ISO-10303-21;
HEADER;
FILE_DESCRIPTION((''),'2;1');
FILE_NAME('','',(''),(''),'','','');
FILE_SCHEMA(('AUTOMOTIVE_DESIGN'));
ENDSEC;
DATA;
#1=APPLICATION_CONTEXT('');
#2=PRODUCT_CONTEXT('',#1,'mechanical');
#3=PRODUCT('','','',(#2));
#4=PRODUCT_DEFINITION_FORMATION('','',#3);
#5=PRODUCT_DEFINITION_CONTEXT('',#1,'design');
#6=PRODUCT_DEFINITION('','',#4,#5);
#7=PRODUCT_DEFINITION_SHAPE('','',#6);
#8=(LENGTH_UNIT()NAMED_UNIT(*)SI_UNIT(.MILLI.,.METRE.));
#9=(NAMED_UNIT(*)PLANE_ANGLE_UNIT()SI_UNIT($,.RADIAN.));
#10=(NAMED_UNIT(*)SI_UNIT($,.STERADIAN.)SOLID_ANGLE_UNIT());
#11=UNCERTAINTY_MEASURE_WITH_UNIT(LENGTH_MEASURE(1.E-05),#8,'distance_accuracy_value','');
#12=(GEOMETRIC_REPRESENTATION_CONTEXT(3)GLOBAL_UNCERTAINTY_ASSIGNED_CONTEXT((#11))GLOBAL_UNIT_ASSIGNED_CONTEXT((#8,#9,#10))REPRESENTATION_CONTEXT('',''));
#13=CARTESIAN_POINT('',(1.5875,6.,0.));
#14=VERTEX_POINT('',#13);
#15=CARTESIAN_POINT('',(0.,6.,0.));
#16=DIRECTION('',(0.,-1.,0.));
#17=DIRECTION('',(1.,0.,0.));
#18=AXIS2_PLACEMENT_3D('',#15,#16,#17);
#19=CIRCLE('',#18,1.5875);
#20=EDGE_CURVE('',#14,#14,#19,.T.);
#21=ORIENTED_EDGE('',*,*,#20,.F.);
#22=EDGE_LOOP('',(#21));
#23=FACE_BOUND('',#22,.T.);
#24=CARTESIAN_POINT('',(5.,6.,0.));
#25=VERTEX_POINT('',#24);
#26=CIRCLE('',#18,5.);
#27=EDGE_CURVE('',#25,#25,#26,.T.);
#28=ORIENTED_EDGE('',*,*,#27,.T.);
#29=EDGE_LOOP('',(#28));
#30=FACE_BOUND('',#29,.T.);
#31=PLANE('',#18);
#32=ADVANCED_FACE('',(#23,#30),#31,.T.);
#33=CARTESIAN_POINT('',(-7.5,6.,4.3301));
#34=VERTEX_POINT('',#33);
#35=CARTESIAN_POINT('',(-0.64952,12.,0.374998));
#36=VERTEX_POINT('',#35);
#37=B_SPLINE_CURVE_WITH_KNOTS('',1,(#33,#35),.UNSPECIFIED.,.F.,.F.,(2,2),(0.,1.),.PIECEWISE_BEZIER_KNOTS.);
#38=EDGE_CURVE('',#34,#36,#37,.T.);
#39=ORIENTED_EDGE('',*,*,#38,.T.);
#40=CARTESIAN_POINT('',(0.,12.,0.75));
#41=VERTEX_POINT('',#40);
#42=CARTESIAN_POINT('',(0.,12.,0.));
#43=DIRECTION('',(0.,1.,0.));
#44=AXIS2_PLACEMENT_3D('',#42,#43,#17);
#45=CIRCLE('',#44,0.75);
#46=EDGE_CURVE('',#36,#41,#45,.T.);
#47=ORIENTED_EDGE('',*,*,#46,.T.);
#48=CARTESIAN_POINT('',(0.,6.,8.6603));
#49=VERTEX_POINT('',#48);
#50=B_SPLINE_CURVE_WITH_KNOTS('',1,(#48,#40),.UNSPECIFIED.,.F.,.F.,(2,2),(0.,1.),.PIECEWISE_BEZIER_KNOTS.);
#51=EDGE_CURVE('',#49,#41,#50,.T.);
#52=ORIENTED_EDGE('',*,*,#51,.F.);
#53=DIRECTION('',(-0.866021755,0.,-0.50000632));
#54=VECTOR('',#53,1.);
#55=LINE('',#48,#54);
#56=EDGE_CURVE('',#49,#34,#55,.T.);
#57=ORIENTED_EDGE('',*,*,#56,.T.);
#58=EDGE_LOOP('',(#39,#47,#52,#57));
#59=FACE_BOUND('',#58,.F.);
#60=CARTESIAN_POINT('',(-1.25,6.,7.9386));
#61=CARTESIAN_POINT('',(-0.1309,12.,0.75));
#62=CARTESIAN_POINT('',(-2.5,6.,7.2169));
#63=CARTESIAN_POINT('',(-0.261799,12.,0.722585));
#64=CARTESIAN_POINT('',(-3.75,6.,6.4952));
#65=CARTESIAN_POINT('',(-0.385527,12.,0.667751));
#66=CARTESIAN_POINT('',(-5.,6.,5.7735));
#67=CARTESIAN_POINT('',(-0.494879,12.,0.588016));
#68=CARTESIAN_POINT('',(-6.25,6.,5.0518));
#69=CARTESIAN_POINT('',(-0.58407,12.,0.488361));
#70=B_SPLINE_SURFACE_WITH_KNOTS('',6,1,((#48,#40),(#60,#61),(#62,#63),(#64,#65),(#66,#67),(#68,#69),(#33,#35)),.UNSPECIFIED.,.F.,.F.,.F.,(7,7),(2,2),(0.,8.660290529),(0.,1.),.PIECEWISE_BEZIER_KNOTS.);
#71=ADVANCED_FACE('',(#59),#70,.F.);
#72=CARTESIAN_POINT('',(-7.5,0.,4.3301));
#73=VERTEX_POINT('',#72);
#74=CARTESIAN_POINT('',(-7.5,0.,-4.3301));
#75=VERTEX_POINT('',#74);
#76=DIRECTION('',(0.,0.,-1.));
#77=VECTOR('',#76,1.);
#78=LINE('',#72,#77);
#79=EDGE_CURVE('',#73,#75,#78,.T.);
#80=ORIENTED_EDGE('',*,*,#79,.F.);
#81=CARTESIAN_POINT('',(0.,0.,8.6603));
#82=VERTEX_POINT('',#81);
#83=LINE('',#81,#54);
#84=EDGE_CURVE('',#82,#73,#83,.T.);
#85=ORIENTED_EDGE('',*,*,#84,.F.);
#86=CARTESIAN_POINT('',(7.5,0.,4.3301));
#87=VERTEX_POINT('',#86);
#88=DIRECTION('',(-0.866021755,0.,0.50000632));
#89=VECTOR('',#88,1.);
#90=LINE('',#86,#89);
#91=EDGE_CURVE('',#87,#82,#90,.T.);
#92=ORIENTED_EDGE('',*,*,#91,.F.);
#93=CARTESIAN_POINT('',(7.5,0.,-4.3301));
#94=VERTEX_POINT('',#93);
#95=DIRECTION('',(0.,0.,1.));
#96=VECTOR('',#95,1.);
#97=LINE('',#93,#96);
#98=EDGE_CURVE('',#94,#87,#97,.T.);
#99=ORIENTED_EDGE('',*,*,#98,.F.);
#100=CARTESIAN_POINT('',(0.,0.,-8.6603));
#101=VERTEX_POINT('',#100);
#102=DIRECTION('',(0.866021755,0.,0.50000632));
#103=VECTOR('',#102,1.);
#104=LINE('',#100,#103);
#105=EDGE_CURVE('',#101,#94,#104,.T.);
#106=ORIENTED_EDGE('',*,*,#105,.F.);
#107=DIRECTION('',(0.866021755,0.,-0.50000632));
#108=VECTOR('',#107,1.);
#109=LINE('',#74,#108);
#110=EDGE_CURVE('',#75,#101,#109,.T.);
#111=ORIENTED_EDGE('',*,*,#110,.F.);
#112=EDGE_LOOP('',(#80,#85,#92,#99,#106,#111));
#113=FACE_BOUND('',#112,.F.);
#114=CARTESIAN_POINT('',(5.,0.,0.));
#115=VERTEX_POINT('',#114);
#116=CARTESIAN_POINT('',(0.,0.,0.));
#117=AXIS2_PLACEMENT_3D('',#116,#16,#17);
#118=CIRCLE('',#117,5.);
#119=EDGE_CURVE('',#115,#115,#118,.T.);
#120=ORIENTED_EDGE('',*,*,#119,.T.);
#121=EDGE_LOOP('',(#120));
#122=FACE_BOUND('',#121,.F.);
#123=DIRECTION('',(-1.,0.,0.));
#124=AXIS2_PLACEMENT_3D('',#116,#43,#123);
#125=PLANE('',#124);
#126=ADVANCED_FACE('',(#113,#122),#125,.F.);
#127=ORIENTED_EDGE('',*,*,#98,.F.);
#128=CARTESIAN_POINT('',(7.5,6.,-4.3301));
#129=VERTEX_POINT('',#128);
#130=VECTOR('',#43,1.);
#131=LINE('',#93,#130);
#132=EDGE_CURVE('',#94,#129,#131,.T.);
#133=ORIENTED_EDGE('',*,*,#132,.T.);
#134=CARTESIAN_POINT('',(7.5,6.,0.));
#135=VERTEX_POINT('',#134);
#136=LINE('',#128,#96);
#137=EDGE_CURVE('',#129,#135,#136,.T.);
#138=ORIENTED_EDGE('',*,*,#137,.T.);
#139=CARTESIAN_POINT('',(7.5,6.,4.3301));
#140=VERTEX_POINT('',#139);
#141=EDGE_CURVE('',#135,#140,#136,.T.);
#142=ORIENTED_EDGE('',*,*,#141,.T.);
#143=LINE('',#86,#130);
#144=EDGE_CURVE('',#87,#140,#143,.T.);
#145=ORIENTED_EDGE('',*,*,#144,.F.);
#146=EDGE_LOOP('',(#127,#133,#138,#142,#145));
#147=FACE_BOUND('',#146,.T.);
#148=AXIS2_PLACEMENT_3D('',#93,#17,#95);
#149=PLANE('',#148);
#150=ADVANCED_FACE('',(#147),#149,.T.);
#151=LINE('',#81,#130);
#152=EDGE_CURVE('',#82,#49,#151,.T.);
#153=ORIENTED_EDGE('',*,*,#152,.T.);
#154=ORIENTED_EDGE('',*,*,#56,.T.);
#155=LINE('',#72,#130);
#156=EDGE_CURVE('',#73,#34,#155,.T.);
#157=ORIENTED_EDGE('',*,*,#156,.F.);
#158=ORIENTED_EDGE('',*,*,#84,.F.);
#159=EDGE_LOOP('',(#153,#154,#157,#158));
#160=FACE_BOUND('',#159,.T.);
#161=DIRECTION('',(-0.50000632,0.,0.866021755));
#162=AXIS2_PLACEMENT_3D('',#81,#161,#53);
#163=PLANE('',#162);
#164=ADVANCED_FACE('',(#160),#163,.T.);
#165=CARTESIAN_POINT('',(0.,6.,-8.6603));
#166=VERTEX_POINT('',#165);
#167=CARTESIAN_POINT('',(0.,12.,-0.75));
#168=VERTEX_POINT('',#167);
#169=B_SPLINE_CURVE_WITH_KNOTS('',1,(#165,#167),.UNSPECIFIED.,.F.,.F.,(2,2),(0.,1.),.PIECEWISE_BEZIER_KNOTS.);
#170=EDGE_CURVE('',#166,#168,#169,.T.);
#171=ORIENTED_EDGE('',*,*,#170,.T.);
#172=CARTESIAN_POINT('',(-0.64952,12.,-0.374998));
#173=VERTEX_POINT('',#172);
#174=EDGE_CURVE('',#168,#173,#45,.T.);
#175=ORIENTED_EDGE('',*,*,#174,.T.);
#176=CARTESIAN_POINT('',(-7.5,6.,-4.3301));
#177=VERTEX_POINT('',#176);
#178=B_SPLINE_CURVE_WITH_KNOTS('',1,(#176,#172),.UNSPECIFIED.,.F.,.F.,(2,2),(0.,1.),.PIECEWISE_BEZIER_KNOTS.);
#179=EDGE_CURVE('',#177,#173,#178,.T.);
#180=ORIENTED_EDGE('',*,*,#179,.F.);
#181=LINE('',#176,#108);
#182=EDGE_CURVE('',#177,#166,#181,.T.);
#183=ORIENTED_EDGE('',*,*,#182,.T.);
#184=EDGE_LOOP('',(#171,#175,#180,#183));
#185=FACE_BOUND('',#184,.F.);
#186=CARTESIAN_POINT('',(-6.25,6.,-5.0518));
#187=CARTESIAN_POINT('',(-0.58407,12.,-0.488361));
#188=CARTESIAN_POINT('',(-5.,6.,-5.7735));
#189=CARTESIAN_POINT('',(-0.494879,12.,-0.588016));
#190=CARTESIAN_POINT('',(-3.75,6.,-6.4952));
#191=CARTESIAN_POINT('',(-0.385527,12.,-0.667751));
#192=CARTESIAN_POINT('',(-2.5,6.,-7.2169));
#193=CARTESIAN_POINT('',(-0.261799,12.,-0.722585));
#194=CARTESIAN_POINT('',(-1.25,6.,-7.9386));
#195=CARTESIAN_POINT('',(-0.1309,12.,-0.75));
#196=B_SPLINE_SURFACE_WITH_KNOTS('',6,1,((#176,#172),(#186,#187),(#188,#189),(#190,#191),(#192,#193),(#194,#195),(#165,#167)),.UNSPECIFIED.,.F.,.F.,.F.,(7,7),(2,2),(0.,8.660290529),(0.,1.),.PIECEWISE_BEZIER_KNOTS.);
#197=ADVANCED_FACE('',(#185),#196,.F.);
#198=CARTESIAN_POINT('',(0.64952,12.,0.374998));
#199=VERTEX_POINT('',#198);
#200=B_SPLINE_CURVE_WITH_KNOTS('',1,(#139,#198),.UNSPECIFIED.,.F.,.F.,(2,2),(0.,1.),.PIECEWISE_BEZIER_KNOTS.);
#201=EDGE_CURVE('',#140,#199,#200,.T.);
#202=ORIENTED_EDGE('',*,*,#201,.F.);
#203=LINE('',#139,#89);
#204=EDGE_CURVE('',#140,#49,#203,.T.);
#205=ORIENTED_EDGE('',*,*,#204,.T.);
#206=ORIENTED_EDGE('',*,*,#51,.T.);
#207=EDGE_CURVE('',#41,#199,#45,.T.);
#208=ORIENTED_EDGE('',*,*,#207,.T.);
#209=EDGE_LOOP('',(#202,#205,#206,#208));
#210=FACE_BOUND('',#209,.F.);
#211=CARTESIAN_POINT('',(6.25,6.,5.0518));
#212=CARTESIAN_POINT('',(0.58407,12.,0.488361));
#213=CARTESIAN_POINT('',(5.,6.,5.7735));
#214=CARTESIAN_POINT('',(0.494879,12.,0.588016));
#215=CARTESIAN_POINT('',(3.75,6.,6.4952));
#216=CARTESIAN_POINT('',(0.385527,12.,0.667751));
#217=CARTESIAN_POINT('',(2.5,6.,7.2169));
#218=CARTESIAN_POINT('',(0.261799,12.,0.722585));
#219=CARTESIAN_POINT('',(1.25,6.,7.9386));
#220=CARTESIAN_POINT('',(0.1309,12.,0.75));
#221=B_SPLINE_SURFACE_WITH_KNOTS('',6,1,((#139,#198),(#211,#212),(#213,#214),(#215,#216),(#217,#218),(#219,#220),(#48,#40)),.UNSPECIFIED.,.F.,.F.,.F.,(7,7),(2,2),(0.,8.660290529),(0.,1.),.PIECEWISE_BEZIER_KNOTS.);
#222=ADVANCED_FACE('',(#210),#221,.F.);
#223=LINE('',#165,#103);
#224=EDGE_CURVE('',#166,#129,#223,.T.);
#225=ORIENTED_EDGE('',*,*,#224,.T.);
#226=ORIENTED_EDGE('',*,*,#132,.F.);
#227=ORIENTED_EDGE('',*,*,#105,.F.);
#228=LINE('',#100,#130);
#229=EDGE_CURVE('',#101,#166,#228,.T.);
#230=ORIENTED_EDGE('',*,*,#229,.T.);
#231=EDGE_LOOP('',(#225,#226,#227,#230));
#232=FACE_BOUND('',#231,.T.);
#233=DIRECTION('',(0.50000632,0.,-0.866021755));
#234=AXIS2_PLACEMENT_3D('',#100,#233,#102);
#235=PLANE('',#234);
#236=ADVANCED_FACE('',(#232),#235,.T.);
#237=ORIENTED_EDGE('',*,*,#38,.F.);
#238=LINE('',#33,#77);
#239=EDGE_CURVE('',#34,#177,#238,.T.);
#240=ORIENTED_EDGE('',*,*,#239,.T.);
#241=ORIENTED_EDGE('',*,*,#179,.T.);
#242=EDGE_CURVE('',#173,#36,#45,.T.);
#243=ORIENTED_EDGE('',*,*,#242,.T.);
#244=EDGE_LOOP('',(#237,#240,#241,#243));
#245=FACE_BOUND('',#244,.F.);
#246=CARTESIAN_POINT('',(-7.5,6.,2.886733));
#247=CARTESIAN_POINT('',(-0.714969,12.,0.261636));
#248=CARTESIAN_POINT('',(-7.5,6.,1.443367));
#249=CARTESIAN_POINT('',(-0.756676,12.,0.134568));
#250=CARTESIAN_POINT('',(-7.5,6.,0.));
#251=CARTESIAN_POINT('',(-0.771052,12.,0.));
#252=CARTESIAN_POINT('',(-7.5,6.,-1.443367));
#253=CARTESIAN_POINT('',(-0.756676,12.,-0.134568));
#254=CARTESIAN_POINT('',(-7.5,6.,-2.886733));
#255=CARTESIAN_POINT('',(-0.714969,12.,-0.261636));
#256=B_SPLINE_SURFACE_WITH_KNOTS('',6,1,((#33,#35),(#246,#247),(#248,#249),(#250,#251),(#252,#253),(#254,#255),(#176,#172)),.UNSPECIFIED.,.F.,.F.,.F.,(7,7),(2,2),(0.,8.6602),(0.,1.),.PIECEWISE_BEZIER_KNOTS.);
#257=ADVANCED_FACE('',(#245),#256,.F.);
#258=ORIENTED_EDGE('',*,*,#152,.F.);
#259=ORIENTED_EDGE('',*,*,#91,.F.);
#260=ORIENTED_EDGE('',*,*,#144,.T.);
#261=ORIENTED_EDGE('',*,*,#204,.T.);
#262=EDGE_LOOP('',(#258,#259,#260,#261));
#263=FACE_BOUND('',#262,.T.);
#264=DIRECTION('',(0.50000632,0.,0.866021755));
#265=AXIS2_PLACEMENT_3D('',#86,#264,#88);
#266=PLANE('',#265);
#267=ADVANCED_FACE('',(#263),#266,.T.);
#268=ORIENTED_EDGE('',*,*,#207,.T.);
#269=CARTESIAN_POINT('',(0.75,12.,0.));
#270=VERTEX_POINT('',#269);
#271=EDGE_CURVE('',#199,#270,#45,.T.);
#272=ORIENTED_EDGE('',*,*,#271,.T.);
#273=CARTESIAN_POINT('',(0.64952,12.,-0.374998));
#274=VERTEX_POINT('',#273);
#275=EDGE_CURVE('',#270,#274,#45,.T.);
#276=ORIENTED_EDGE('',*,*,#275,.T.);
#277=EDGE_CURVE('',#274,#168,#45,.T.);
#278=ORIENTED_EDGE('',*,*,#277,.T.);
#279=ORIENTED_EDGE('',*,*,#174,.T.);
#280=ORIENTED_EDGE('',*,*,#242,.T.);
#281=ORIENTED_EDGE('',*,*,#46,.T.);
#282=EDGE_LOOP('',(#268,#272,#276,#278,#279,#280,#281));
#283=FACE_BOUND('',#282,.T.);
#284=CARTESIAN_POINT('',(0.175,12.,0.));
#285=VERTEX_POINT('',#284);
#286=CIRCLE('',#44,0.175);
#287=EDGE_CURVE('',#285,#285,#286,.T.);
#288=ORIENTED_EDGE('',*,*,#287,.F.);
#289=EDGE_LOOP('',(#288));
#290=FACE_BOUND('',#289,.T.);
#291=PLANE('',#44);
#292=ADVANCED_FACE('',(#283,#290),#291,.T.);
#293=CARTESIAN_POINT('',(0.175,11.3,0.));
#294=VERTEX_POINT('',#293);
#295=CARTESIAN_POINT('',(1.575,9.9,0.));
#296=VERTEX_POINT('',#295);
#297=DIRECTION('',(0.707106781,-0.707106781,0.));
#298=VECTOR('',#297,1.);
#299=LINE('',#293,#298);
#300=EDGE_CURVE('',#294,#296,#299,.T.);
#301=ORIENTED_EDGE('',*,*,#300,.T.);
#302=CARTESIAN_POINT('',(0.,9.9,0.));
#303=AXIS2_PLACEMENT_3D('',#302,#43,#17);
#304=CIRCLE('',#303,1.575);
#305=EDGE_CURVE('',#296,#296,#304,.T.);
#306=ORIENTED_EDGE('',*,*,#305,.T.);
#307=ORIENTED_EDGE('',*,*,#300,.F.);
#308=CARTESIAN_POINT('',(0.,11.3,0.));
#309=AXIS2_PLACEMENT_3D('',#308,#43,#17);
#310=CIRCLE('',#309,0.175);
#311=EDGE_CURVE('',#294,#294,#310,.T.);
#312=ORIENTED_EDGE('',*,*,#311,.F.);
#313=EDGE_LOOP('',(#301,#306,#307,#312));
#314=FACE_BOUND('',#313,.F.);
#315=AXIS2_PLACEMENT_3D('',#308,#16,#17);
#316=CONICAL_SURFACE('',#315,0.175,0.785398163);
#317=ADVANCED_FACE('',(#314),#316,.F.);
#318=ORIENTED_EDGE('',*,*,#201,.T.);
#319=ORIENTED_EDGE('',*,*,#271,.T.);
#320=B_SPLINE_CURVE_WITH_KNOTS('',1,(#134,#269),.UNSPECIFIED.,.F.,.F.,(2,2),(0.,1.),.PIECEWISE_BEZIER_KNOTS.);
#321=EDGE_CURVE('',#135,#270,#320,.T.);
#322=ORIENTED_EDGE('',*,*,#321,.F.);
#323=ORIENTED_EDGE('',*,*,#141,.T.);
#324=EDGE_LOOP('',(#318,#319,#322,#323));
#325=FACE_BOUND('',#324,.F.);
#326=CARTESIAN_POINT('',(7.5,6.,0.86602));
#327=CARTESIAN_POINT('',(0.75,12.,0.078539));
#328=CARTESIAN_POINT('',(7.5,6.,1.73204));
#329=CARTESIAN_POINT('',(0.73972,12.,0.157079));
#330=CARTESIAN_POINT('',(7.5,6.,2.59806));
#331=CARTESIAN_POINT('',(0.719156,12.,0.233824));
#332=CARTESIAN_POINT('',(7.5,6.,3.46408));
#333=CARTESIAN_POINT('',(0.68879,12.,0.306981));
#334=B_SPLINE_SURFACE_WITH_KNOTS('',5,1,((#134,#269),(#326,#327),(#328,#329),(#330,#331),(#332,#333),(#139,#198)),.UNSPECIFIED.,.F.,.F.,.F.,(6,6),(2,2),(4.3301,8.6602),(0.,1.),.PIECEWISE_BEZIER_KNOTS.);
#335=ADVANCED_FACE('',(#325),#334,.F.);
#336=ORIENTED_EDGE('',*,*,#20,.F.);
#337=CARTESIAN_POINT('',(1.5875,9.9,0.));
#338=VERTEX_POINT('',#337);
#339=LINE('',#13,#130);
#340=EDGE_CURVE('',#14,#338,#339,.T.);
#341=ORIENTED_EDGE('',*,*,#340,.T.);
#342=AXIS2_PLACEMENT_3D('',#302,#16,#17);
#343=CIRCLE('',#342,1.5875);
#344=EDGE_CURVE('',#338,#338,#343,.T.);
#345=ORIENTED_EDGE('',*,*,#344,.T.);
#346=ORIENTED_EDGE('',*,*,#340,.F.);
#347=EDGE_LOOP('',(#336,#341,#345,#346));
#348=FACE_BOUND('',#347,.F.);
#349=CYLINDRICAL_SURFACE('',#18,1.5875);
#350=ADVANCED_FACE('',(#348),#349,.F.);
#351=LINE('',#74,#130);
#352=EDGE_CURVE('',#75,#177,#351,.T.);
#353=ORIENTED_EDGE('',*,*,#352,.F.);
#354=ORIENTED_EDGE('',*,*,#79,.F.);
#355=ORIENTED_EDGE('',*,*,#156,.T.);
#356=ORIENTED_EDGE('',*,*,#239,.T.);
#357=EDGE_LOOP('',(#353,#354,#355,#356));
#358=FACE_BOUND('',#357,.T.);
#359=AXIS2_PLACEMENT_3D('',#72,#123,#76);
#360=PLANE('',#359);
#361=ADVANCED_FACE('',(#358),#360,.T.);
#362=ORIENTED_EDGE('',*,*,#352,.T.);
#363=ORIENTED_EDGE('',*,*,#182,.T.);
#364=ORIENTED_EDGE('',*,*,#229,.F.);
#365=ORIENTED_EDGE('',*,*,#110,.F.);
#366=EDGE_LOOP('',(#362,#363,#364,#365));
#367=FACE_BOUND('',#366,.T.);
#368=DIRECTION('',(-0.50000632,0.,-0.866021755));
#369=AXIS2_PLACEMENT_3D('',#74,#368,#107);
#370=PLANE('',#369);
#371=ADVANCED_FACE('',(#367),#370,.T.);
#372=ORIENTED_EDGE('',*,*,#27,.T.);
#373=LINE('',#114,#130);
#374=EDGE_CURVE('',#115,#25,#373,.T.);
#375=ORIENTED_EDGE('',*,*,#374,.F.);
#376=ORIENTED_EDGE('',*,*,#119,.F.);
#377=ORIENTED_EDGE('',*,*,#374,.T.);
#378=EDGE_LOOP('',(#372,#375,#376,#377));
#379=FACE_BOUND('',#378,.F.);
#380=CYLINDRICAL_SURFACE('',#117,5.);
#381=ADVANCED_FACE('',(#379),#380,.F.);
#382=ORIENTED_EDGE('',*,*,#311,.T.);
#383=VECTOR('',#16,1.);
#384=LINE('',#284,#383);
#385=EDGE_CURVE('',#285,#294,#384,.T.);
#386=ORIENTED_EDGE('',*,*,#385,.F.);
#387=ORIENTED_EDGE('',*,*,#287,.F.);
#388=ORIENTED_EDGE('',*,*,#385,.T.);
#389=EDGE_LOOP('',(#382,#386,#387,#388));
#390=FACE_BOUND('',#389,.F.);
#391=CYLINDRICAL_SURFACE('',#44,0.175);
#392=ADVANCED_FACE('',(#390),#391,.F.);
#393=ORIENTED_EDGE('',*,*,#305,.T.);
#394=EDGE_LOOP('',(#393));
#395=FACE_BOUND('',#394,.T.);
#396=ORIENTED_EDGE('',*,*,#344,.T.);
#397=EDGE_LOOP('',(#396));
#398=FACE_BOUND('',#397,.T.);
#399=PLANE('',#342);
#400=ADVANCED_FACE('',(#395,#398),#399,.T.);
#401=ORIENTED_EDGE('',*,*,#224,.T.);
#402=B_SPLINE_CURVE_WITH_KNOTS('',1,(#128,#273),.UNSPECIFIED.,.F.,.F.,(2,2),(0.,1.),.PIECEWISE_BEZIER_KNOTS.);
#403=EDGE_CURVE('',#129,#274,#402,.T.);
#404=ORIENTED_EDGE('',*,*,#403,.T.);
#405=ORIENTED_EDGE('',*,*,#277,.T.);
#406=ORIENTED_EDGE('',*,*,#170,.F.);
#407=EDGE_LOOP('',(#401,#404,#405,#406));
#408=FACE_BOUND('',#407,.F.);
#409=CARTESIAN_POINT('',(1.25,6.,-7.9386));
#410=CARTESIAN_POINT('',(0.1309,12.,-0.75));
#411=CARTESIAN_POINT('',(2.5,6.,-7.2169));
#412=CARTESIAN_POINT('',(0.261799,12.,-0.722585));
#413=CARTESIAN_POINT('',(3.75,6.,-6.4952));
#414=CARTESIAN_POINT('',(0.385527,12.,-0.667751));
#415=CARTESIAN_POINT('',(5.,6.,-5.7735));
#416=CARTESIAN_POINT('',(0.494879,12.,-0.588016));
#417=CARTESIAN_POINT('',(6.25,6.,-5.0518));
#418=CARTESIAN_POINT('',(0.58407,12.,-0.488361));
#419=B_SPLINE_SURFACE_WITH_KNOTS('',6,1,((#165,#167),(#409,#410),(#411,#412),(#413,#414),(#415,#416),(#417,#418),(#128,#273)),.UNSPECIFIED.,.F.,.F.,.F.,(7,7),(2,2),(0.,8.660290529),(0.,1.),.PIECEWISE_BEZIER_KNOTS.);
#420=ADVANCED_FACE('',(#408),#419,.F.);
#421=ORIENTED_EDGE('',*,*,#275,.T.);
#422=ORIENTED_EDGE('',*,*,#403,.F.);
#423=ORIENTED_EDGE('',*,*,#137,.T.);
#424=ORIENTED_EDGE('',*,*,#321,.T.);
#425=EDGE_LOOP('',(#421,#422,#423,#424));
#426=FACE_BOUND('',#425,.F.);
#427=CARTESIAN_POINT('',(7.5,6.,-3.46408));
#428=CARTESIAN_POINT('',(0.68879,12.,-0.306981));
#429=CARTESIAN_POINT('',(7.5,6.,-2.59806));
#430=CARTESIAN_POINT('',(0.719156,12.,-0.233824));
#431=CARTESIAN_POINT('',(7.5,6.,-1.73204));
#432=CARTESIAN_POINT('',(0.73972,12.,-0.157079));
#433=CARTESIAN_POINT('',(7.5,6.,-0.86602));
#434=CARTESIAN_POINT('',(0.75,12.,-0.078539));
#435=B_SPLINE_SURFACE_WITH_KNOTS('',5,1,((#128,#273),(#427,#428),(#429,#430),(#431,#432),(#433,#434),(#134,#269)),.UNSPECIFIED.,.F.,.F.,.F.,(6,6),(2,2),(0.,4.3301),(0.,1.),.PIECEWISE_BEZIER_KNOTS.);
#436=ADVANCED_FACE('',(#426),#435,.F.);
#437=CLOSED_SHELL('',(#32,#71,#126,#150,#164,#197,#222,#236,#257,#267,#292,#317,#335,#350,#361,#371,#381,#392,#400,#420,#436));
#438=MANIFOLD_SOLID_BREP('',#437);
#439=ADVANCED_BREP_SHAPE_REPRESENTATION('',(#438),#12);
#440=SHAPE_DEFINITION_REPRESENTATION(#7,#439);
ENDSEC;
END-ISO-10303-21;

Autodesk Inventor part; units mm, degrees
ref_plane "YZ Plane" through (0, 0, 0) normal (1, 0, 0) x (0, 1, 0)
ref_plane "XZ Plane" through (0, 0, 0) normal (0, 1, 0) x (-1, 0, 0)
sketch "Sketch1" plane through (0, 0, 0) normal (0, 1, 0) x (-1, 0, 0)
  line L0 (0, 8.6603) -> (7.5, 4.3301)
  line L1 (7.5, 4.3301) -> (7.5, -4.3301)
  line L2 (7.5, -4.3301) -> (0, -8.6603)
  line L3 (0, -8.6603) -> (-7.5, -4.3301)
  line L4 (-7.5, -4.3301) -> (-7.5, 4.3301)
  line L5 (-7.5, 4.3301) -> (0, 8.6603)
  point P0 (0, 0)
  point P1 (0, 0)
  dimension "d0" = 7.5
extrude "Extrusion1" add sketch "Sketch1" along normal blind 6
ref_plane "Work Plane1" through (0, 12, 0) normal (0, 1, 0) x (1, 0, 0)
sketch "Sketch3" plane through (0, 12, 0) normal (0, 1, 0) x (1, 0, 0)
  circle A0 centre (0, 0) radius 0.75
  dimension "d4" = 1.5
loft "Loft1" add profiles "Sketch3" section 1 edges at (-3.75, 6, 6.4952) (3.75, 6, 6.4952) (7.5, 6, 0) (3.75, 6, -6.4952) (-3.75, 6, -6.4952) (-7.5, 6, 0)
sketch "Sketch4" plane through (0, 0, 0) normal (0, -1, 0) x (1, 0, 0)
  circle A0 centre (0, 0) radius 5
  dimension "d9" = 10
extrude "Extrusion2" cut sketch "Sketch4" against normal blind 6
thread "Thread1" size "M10x1.5" class "6H" standard "ANSI Metric M Profile" full length
sketch "Sketch5" plane through (0, 6, 0) normal (0, -1, 0) x (1, 0, 0)
  circle A0 centre (0, 0) radius 5 projected
  circle A1 centre (0, 0) radius 1.5875
  dimension "d14" = 3.175
sketch "Sketch6" plane through (0, 12, 0) normal (0, 1, 0) x (1, 0, 0)
  arc A0 (-0.6495, 0.375) -> (-0.6495, -0.375) centre (0, 0) ccw projected
  circle A1 centre (0, 0) radius 0.175
  dimension "d15" = 0.35
extrude "Extrusion3" cut sketch "Sketch6" against normal blind 7.75
extrude "Extrusion4" cut sketch "Sketch5" against normal blind 3.9 contours A1
chamfer "Chamfer1" distance 1.4 angle 45 1 edges at (-0.175, 9.9, 0)
properties part number "Nozzle"
